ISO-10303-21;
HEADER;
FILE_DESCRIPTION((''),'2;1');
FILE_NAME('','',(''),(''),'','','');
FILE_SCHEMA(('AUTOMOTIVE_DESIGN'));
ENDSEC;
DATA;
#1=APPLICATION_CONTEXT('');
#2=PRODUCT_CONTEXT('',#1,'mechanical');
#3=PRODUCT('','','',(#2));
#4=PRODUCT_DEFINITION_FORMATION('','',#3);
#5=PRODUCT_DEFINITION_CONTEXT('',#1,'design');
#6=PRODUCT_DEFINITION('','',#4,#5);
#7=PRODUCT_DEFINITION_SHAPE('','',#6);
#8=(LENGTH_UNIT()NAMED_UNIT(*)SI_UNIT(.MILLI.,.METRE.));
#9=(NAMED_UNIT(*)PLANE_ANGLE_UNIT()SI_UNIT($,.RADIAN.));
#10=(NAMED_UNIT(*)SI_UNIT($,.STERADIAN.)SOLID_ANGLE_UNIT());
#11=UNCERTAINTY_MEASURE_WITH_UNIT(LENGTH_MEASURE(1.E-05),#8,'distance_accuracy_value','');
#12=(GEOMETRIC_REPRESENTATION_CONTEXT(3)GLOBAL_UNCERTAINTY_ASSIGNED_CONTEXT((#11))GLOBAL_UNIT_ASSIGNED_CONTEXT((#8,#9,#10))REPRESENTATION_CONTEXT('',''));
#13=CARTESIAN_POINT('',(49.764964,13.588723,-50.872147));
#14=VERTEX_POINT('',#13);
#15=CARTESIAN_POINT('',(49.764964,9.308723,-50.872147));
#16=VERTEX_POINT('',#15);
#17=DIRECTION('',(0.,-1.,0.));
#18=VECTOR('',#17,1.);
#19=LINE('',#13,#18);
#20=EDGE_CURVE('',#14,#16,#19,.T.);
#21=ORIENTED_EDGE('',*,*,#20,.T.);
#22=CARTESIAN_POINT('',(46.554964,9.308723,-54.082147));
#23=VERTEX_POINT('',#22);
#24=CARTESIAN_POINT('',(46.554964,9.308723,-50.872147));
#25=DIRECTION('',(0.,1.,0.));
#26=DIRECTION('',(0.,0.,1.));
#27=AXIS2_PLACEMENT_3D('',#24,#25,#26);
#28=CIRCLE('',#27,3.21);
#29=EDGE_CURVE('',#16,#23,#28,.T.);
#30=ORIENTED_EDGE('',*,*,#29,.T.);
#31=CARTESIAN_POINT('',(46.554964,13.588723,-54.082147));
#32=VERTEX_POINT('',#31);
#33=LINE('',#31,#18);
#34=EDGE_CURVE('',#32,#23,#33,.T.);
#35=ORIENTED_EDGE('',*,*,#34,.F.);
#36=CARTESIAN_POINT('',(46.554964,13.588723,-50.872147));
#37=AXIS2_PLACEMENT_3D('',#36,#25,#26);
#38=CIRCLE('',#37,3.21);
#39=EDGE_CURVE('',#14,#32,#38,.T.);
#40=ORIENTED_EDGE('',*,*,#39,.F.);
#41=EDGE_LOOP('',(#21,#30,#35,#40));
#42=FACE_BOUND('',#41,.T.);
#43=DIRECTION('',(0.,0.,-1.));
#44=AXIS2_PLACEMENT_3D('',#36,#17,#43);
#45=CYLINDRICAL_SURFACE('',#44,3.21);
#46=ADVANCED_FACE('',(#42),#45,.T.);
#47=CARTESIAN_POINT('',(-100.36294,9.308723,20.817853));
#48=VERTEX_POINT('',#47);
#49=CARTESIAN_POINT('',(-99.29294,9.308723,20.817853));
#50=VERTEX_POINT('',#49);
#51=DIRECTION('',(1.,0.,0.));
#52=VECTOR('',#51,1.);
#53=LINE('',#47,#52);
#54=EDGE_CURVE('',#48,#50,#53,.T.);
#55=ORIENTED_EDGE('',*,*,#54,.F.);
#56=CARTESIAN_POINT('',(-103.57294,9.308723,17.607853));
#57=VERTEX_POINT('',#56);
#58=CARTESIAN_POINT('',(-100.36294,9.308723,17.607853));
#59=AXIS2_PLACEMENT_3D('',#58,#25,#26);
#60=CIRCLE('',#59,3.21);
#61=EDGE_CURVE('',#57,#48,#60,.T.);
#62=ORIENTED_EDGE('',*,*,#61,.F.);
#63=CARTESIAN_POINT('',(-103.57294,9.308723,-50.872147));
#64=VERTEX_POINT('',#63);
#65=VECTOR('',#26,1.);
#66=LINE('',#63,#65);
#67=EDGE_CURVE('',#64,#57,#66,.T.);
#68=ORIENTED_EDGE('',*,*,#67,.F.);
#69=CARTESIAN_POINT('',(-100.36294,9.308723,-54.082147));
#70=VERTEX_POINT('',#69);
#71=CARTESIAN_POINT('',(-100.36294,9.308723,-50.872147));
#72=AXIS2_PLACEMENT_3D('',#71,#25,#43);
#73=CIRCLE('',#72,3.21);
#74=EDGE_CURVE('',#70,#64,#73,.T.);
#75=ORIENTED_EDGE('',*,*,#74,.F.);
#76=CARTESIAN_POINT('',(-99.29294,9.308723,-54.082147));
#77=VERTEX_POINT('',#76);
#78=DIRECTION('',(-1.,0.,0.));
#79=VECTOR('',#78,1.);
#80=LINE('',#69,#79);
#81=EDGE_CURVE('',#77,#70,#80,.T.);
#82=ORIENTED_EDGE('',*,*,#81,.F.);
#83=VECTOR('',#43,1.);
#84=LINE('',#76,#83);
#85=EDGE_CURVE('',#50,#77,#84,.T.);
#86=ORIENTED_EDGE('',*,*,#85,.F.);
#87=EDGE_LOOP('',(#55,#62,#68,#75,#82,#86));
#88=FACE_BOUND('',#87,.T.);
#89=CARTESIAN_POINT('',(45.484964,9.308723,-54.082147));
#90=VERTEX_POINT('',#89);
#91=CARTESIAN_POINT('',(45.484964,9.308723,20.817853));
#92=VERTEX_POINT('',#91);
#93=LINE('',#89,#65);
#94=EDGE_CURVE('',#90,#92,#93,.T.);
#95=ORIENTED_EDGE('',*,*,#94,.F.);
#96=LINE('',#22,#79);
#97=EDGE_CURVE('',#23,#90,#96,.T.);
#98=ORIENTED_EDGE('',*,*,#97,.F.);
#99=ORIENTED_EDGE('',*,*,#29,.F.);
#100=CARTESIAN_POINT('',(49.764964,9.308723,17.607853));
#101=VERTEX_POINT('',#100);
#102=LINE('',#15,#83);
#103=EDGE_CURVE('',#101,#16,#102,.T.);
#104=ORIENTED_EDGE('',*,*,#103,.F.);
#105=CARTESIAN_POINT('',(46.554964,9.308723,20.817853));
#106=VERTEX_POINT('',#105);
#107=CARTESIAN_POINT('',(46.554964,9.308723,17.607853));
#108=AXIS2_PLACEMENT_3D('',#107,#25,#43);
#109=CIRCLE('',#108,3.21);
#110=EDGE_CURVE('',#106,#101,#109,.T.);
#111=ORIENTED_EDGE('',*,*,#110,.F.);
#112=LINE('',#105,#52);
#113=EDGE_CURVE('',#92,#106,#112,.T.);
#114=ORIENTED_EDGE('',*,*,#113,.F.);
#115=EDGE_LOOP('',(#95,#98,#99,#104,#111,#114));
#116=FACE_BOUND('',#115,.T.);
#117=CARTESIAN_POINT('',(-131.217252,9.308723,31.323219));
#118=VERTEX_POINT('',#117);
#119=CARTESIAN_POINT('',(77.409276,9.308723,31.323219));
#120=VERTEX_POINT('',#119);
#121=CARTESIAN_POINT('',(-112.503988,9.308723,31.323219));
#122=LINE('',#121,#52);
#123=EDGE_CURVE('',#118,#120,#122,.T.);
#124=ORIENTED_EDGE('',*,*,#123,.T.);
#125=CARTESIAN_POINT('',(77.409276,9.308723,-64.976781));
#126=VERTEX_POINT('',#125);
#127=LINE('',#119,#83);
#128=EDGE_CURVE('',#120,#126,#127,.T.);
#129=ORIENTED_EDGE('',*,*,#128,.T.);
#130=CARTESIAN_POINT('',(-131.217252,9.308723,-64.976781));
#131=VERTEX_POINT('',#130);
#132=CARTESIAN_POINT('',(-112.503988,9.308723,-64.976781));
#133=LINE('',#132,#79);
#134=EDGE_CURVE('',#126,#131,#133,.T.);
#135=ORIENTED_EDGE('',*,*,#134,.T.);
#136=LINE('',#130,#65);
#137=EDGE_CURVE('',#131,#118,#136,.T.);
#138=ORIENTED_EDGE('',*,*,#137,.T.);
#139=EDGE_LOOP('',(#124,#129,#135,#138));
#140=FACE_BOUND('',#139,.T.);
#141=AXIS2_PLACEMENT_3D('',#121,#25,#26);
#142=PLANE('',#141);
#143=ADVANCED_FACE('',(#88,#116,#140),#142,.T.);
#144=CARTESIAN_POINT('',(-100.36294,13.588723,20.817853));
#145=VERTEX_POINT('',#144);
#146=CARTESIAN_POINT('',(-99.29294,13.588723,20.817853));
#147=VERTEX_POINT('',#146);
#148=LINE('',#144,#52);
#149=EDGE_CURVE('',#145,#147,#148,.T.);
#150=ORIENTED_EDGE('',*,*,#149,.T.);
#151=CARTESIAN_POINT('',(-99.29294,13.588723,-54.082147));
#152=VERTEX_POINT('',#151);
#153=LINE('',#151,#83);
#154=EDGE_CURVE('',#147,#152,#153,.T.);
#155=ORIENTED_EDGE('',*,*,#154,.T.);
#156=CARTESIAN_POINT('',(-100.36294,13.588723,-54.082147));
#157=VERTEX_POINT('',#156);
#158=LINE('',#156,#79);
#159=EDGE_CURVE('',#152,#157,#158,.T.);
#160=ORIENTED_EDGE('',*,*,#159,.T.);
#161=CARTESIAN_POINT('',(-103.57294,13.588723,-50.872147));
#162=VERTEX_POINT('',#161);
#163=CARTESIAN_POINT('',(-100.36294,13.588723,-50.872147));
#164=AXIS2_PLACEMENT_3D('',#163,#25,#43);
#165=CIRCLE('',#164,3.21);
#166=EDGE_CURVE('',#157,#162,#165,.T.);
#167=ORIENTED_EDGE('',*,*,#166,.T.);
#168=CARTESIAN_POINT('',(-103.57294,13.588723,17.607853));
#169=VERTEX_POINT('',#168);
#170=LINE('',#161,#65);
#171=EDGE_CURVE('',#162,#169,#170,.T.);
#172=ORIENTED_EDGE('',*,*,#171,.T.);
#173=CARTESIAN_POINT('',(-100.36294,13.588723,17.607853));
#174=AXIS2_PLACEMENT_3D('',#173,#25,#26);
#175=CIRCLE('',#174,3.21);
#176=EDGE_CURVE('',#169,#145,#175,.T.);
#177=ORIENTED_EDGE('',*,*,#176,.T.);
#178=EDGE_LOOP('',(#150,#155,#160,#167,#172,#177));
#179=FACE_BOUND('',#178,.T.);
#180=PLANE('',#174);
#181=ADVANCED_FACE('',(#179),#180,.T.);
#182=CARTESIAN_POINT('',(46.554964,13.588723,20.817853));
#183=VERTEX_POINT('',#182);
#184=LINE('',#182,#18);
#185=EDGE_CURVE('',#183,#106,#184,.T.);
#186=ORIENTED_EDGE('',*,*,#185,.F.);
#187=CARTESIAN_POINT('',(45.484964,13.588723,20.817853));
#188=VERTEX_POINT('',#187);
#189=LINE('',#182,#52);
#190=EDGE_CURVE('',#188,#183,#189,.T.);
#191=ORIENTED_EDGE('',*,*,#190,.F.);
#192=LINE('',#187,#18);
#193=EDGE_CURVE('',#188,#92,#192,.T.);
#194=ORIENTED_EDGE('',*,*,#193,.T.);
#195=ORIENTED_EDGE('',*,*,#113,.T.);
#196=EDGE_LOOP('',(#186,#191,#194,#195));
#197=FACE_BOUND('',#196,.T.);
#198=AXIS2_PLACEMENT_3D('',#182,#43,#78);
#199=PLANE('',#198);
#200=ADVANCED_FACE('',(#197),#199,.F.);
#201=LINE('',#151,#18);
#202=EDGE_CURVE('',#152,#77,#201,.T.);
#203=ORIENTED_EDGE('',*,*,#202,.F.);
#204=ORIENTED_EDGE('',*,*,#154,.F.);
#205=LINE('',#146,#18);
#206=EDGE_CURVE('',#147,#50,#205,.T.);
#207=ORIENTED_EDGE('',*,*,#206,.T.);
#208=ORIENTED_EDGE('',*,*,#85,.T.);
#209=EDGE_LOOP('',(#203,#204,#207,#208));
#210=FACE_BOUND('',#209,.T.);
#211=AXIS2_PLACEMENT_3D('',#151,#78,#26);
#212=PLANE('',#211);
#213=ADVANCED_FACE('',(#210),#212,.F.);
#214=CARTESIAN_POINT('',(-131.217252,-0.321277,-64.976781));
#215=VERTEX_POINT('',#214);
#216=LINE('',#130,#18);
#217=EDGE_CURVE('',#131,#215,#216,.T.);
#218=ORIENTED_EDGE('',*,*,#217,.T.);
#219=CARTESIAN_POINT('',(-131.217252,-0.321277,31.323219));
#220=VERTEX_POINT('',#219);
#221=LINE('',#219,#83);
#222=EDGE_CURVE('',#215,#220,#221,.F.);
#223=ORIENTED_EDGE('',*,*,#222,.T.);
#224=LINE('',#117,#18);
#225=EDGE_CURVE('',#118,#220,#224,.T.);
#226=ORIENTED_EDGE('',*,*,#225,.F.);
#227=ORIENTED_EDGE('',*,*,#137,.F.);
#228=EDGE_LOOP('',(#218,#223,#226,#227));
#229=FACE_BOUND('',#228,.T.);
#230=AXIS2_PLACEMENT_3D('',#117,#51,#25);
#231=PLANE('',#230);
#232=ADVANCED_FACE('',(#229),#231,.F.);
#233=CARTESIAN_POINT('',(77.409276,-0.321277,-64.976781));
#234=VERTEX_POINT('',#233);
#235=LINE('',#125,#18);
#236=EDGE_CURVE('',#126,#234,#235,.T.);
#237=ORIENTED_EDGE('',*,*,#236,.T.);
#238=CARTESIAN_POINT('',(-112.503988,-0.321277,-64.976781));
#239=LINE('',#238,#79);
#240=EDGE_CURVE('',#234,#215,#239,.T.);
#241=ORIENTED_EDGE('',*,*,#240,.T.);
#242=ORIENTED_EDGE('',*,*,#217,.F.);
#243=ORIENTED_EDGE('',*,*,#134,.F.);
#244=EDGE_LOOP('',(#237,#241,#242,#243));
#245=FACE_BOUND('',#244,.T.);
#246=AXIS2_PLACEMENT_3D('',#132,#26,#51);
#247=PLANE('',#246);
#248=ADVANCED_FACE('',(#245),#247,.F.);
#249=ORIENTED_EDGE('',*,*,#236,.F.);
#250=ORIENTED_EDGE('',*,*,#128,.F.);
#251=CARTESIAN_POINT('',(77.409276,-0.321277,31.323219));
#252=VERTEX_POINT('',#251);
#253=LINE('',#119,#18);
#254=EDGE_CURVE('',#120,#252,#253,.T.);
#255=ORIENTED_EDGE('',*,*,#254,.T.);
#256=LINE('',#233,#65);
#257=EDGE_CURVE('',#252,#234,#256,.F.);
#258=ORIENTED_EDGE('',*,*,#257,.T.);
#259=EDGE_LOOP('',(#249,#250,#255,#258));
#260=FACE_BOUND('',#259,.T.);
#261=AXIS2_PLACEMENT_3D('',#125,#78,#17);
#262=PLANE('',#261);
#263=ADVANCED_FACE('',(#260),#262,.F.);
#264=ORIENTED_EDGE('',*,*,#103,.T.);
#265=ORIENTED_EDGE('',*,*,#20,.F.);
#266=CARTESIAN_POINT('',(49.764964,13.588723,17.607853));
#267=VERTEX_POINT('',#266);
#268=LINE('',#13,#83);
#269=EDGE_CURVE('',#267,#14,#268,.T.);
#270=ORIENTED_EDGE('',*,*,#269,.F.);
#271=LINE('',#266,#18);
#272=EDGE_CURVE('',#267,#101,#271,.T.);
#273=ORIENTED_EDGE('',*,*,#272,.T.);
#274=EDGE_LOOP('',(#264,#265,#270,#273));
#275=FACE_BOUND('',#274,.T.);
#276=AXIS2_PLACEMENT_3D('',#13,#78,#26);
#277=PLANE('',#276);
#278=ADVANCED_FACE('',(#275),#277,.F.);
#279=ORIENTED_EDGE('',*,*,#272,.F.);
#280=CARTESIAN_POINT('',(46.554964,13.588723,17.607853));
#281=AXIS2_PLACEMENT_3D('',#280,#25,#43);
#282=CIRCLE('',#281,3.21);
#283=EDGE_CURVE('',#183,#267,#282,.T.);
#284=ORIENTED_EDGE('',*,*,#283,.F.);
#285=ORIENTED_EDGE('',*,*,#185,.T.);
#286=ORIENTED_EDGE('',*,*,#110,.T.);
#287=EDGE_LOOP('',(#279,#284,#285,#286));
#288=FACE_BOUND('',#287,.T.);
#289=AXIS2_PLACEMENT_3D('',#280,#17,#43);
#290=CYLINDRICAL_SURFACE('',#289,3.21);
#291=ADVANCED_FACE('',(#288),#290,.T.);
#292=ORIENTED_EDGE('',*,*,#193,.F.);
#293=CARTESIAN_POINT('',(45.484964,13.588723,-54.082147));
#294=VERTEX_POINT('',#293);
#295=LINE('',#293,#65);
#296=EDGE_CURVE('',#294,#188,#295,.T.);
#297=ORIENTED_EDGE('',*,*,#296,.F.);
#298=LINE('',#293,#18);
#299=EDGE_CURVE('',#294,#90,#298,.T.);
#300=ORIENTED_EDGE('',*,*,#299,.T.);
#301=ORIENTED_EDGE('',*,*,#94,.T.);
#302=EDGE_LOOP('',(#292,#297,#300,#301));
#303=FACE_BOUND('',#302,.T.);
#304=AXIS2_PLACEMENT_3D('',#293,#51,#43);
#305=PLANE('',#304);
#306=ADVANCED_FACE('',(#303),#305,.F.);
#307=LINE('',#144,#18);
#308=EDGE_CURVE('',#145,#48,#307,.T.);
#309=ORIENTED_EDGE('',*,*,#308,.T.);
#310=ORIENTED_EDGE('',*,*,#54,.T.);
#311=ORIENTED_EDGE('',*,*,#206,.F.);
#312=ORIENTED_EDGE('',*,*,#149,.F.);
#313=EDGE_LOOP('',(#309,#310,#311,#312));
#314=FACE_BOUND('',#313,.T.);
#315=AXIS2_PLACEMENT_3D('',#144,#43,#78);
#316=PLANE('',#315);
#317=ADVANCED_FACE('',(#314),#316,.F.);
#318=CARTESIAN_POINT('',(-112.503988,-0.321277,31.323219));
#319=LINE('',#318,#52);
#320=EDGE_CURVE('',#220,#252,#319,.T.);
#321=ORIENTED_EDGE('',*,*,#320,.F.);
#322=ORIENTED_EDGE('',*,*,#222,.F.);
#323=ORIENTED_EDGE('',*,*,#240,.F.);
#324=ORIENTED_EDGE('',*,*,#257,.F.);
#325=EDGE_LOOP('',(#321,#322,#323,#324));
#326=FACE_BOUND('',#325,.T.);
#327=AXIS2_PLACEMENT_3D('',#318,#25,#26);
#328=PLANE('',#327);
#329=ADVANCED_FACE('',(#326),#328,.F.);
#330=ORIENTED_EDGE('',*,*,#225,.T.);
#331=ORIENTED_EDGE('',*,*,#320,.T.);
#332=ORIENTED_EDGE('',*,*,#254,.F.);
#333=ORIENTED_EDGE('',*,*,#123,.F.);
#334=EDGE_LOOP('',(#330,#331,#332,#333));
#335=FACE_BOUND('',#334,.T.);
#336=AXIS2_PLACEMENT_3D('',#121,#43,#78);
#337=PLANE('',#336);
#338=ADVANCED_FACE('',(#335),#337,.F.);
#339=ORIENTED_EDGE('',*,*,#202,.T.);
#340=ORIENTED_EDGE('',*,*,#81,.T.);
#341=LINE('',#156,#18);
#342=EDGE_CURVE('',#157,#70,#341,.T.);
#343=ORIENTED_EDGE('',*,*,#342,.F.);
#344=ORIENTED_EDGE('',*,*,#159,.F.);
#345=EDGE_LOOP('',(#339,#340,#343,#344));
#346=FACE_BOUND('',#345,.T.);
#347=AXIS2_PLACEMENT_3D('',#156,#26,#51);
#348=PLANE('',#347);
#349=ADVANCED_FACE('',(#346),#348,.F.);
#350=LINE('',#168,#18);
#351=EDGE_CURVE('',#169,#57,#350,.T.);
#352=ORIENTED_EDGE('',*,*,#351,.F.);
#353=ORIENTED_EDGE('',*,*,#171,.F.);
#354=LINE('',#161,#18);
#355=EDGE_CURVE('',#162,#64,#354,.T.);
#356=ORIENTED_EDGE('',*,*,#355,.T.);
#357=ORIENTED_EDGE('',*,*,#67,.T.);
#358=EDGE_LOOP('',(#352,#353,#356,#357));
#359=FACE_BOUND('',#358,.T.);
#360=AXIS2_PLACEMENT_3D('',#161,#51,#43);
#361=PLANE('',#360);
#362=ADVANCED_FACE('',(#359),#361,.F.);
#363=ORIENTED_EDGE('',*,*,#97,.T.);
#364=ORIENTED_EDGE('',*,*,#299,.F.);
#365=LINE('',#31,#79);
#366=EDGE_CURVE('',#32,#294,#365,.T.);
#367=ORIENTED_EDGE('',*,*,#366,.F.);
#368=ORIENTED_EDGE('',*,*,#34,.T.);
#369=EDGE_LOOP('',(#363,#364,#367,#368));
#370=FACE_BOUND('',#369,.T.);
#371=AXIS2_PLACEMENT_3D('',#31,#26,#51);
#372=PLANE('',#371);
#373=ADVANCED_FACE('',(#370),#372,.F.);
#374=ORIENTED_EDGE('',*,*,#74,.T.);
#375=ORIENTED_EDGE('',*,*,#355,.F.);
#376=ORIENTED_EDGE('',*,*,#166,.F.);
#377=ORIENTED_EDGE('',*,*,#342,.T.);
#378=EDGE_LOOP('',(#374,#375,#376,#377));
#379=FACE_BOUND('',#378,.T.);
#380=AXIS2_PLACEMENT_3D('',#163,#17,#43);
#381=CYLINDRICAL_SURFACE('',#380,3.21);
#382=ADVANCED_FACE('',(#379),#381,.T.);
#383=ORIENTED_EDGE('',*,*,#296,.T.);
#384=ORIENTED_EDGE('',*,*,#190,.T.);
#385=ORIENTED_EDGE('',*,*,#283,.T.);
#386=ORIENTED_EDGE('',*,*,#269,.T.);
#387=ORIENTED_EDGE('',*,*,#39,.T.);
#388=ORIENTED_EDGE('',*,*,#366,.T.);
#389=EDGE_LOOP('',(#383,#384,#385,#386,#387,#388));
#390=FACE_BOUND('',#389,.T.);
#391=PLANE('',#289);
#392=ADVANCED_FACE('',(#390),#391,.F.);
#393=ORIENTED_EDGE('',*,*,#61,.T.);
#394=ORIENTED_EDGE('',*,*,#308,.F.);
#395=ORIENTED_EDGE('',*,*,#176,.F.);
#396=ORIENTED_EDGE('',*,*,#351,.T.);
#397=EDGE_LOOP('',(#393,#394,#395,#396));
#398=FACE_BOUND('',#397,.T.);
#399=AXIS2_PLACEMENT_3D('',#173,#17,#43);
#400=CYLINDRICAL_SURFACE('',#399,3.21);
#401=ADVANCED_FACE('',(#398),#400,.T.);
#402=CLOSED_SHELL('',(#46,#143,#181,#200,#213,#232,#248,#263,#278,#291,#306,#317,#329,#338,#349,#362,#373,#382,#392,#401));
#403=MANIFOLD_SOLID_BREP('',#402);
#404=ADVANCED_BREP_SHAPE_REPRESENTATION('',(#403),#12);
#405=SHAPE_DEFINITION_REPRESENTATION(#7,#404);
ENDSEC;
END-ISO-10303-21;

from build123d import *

# Parameters (mm, degrees)
ESQUISSE1_W                 = 160
ESQUISSE1_H                 = 90
T_LE_DE_BASE_PLI_E1_DEPTH   = 9
T_LE_PLI_E_SUR_AR_TE1_DEPTH = 90
T_LE_PLI_E_SUR_AR_TE2_DEPTH = 90
EXTRUSION1_DEPTH            = 4
ETAT_START                  = -116.640587823
ETAT_D_PLI_1_OUTLINE_W      = 10
ETAT_D_PLI_1_OUTLINE_H      = 90
ETAT_D_PLI_1_DEPTH          = 179.4732
ETAT_START_2                = -124.393019868
ETAT_D_PLI_1_2_OUTLINE_W    = 9
ETAT_D_PLI_1_2_OUTLINE_H    = 90
ETAT_D_PLI_1_2_DEPTH        = 194.978064089
ECHELLE1_SCALE              = 1.07


# Read off the part's stored shape, not the designer's step: Etat déplié1
# Sheet-metal steps are written as plain solids
with BuildPart() as part:
    # Esquisse1 → Tôle de base pliée1 (new body)
    with BuildSketch(Plane(origin=(0, 0, 0), x_dir=(1, 0, 0), z_dir=(0, 1, 0))):
        with Locations((-26.903987823, 16.826605784)):
            Rectangle(ESQUISSE1_W, ESQUISSE1_H)
    extrude(amount=T_LE_DE_BASE_PLI_E1_DEPTH)

    # Tôle pliée sur arête1 section (across the edge) → Tôle pliée sur arête1 (add)
    with BuildSketch(Plane(origin=(53.832612177, 0, -61.826605784), x_dir=(-1, 0, 0), z_dir=(0, 0, 1))):
        with BuildLine():
            Line((-9, 0.7366), (-9, 10))
            Line((-9, 10), (0, 10))
            Line((0, 10), (0, 0.7366))
            ThreePointArc((0, 0.7366), (0.215745145, 0.215745145), (0.7366, 0))
            Line((0.7366, 0), (0.7366, -9))
            ThreePointArc((0.7366, -9), (-6.148215886, -6.148215886), (-9, 0.7366))
        make_face()
    extrude(amount=T_LE_PLI_E_SUR_AR_TE1_DEPTH)

    # Tôle pliée sur arête2 section (across the edge) → Tôle pliée sur arête2 (add)
    with BuildSketch(Plane(origin=(-107.640587823, 0, 28.173394216), x_dir=(1, 0, 0), z_dir=(0, 0, -1))):
        with BuildLine():
            Line((-9, 0.7366), (-9, 10))
            Line((-9, 10), (0, 10))
            Line((0, 10), (0, 0.7366))
            ThreePointArc((0, 0.7366), (0.215745145, 0.215745145), (0.7366, 0))
            Line((0.7366, 0), (0.7366, -9))
            ThreePointArc((0.7366, -9), (-6.148215886, -6.148215886), (-9, 0.7366))
        make_face()
    extrude(amount=T_LE_PLI_E_SUR_AR_TE2_DEPTH)

    # Esquisse9 → Extrusion1 (add)
    with BuildSketch(Plane(origin=(0, 9, 0), x_dir=(1, 0, 0), z_dir=(0, 1, 0))):
        with BuildLine():
            Line((-95.557213934, 51.644704016), (-94.557213934, 51.644704016))
            Line((-94.557213934, 51.644704016), (-94.557213934, -18.355295984))
            Line((-94.557213934, -18.355295984), (-95.557213934, -18.355295984))
            ThreePointArc((-95.557213934, -18.355295984), (-97.678534277, -17.476616327), (-98.557213934, -15.355295984))
            Line((-98.557213934, -15.355295984), (-98.557213934, 48.644704016))
            ThreePointArc((-98.557213934, 48.644704016), (-97.678534277, 50.76602436), (-95.557213934, 51.644704016))
        make_face()
        with BuildLine():
            Line((40.749238287, 51.644704016), (40.749238287, -18.355295984))
            Line((40.749238287, -18.355295984), (41.749238287, -18.355295984))
            ThreePointArc((41.749238287, -18.355295984), (43.870558631, -17.476616327), (44.749238287, -15.355295984))
            Line((44.749238287, -15.355295984), (44.749238287, 48.644704016))
            ThreePointArc((44.749238287, 48.644704016), (43.870558631, 50.76602436), (41.749238287, 51.644704016))
            Line((41.749238287, 51.644704016), (40.749238287, 51.644704016))
        make_face()
    extrude(amount=EXTRUSION1_DEPTH)

    # Etat déplié1 outline → Etat déplié1 (cut)
    with BuildSketch(Plane.YZ.offset(ETAT_START)):
        with Locations((-5, -16.826605784)):
            Rectangle(ETAT_D_PLI_1_OUTLINE_W, ETAT_D_PLI_1_OUTLINE_H)
    extrude(amount=ETAT_D_PLI_1_DEPTH, mode=Mode.SUBTRACT)

    # Etat d_pli_1 2 outline → Etat d_pli_1 2 (add)
    with BuildSketch(Plane.YZ.offset(ETAT_START_2)):
        with Locations((4.5, -16.826605784)):
            Rectangle(ETAT_D_PLI_1_2_OUTLINE_W, ETAT_D_PLI_1_2_OUTLINE_H)
    extrude(amount=ETAT_D_PLI_1_2_DEPTH)


with BuildPart() as part_1:
    # Echelle1: scaled about (-26.903987823, 4.589665377, -16.824096508)
    add(part.part.scale(ECHELLE1_SCALE).moved(Location((1.883279148, -0.321276576, 1.177686756))))


solid = part_1.part
